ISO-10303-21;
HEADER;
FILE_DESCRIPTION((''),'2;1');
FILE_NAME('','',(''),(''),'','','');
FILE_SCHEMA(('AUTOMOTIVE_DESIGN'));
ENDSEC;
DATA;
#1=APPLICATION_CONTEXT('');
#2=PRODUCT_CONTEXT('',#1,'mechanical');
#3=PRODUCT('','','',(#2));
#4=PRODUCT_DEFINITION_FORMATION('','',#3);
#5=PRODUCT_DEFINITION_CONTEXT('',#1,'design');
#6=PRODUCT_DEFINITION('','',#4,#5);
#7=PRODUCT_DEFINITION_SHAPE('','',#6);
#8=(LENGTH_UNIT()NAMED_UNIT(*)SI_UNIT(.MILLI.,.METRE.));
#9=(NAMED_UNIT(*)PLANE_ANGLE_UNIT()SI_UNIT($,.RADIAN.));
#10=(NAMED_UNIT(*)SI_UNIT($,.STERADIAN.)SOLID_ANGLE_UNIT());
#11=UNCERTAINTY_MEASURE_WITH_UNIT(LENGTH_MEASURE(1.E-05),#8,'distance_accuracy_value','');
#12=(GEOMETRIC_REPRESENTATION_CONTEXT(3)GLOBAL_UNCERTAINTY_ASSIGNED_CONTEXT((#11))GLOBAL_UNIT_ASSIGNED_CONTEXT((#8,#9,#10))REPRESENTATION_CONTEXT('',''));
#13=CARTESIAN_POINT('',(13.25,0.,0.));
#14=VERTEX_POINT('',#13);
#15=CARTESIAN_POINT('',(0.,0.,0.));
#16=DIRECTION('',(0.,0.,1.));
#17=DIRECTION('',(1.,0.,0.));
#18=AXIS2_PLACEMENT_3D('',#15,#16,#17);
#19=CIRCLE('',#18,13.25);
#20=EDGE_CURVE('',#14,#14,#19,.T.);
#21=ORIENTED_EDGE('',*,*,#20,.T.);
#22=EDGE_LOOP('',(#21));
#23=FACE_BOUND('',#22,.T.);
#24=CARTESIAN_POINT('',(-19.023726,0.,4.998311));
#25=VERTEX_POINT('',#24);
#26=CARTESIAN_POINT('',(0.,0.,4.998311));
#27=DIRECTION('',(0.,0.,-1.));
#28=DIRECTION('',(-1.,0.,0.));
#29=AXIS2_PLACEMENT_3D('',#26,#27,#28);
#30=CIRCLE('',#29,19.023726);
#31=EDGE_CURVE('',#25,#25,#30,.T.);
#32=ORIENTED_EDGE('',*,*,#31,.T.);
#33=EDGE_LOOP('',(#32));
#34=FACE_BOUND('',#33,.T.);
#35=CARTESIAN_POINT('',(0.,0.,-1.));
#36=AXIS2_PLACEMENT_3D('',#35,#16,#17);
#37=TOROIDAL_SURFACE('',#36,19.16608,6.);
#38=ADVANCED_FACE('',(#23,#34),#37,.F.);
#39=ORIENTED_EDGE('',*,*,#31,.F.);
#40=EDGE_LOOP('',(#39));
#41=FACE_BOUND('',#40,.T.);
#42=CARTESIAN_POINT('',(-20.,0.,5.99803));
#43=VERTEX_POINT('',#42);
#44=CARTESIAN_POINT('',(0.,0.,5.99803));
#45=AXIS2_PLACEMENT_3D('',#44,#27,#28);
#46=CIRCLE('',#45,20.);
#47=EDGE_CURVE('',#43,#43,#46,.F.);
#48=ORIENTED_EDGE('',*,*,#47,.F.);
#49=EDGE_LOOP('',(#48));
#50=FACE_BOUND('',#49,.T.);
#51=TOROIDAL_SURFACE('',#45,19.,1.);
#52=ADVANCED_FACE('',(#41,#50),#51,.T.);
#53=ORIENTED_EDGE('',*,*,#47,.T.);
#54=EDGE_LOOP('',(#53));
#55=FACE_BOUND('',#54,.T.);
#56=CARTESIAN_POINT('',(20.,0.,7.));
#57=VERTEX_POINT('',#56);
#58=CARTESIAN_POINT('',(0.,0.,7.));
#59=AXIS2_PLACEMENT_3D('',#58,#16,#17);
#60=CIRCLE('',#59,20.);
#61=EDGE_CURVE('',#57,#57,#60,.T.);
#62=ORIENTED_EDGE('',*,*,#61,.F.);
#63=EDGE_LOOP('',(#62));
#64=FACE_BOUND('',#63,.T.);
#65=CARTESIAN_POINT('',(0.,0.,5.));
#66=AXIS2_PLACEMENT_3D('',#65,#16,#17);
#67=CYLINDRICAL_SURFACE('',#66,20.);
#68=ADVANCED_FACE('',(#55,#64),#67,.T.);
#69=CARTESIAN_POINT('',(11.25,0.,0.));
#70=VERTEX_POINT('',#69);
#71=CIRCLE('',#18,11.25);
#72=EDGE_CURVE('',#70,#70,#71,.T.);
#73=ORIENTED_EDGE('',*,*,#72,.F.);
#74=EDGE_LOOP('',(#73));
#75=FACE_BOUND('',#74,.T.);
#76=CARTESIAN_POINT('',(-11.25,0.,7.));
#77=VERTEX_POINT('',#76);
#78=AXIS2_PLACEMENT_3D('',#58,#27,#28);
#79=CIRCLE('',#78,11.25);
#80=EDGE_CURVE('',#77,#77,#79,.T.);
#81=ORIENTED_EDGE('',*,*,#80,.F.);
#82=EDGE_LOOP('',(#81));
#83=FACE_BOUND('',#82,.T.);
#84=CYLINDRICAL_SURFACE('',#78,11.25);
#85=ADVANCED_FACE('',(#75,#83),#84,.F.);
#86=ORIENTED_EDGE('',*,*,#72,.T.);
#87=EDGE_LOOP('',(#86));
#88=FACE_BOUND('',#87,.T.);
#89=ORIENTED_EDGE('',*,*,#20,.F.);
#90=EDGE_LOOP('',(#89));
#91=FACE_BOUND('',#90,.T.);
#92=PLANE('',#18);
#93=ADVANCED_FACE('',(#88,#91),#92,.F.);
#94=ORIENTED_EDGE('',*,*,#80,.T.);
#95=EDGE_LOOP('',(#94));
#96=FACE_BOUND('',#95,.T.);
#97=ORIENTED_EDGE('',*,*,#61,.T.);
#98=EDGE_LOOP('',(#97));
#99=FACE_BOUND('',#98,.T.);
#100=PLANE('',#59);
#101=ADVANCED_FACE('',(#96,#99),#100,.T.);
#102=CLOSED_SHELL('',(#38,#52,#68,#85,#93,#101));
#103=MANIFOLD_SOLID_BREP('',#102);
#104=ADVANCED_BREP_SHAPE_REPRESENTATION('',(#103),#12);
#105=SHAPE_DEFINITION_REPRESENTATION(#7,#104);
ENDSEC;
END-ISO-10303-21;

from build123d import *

# Parameters (mm, degrees)
SKETCH1_R           = 13.25
SKETCH1_R_2         = 11.25
BOSS_EXTRUDE1_DEPTH = 7
SKETCH2_R           = 20
BOSS_EXTRUDE2_DEPTH = 2
FILLET1_R           = 6
SKETCH3_R           = 11.25
CUT_EXTRUDE1_DEPTH  = 2
FILLET2_R           = 1


with BuildPart() as part:
    # Sketch1 → Boss-Extrude1 (new body)
    with BuildSketch(Plane.XY):
        Circle(SKETCH1_R)
        Circle(SKETCH1_R_2, mode=Mode.SUBTRACT)
    extrude(amount=BOSS_EXTRUDE1_DEPTH)

    # Sketch2 → Boss-Extrude2 (add)
    with BuildSketch(Plane.XY.offset(7)):
        Circle(SKETCH2_R)
    extrude(amount=-BOSS_EXTRUDE2_DEPTH)

    # Fillet1
    # the kernel refuses this fillet: 6 mm, written as the material it adds along each edge
    with BuildSketch(Plane(origin=(0, 0, 5), x_dir=(1, 0, 0), z_dir=(0, 1, 0))) as fillet1_piece_1:
        with BuildLine():
            CenterArc((19.166079783, 6), FILLET1_R, 189.594068227, 80.405931773)
            Line((19.166079783, 0), (19.166079783, -0.12))
            Line((19.166079783, -0.12), (13.25, -0.12))
            Line((13.25, -0.12), (13.13, 0))
            ThreePointArc((13.13, 0), (13.13, 2.5), (13.131678404, 4.98))
            Line((13.131678404, 4.98), (13.25, 5))
        make_face()
    revolve(axis=Axis((0, 0, 5), (0, 0, -1)))

    # Sketch3 → Cut-Extrude1 (cut)
    with BuildSketch(Plane(origin=(0, 0, 5), x_dir=(-1, 0, 0), z_dir=(0, 0, -1))):
        Circle(SKETCH3_R)
    extrude(amount=-CUT_EXTRUDE1_DEPTH, mode=Mode.SUBTRACT)

    # Fillet2
    fillet2_edges = [part.edges().sort_by_distance(p)[0] for p in [
        (-20, 0, 5),
    ]]
    fillet(fillet2_edges, radius=FILLET2_R)


solid = part.part
